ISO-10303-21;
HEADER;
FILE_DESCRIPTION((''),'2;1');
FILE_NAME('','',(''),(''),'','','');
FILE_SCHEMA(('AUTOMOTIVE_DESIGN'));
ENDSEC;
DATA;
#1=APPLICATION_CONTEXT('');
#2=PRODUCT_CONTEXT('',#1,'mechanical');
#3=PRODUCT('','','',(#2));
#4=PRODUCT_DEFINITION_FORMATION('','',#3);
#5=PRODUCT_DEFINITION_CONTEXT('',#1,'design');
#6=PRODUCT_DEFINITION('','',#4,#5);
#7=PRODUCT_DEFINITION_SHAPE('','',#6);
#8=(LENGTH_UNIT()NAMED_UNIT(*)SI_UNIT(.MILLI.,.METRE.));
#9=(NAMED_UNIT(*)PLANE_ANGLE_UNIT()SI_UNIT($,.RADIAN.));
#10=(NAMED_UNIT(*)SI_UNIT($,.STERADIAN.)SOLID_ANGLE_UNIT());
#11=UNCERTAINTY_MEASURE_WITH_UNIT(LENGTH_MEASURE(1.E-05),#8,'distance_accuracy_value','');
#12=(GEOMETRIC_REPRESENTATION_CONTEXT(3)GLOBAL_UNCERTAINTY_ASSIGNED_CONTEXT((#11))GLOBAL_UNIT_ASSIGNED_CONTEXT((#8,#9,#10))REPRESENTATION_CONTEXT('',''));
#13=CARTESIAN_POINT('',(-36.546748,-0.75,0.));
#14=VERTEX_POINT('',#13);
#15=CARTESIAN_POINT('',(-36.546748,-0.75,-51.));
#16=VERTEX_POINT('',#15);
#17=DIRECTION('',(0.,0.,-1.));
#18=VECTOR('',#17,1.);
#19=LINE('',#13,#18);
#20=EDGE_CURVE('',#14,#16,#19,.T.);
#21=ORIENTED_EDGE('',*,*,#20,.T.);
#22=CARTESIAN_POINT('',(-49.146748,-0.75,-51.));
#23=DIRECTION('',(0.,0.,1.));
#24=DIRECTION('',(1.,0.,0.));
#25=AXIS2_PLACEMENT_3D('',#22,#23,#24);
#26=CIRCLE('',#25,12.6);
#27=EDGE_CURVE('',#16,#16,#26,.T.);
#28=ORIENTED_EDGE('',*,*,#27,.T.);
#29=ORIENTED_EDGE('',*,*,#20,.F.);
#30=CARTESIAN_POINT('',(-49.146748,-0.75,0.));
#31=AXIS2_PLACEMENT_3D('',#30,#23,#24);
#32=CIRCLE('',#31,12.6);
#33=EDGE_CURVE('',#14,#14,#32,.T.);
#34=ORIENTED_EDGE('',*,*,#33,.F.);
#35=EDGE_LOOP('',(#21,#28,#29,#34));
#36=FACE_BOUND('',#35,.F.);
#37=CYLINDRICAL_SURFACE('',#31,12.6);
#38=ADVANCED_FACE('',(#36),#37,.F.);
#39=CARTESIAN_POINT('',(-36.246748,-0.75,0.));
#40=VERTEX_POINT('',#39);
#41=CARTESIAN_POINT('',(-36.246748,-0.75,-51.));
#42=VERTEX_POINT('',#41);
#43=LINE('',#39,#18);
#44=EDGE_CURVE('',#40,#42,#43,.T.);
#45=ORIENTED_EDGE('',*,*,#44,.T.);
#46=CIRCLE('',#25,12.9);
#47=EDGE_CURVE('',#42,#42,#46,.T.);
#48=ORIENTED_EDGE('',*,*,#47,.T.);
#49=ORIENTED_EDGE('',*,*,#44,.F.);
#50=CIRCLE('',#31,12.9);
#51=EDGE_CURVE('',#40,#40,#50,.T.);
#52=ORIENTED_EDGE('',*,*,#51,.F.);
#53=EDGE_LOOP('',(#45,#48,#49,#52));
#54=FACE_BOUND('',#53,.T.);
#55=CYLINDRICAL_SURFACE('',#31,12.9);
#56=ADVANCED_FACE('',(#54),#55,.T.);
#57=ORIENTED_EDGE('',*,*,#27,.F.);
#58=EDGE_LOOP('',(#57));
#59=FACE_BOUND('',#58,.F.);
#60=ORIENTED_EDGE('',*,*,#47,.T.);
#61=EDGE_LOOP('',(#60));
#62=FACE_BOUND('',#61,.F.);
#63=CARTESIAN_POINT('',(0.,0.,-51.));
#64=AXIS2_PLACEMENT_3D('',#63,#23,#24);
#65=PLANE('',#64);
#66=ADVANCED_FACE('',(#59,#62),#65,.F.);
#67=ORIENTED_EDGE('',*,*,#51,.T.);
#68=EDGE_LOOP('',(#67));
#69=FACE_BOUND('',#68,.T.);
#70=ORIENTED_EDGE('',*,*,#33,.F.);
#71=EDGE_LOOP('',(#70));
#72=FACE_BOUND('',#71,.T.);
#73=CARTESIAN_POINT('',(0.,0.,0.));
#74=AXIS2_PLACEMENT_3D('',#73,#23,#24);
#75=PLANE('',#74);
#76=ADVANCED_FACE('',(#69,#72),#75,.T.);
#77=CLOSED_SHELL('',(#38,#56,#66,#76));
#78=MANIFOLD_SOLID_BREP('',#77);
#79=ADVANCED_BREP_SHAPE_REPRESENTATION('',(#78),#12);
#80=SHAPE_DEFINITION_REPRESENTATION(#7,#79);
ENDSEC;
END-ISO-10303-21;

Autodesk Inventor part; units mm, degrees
ref_plane "YZ Plane" through (0, 0, 0) normal (1, 0, 0) x (0, 1, 0)
ref_plane "XZ Plane" through (0, 0, 0) normal (0, 1, 0) x (-1, 0, 0)
ref_plane "РабПлоскость1" through (0, 0, 0) normal (0, 0, 1) x (1, 0, 0)
ref_plane "РабПлоскость2" through (-62.145235, -0.948385, -51) normal (0, 0, -1) x (0.0152604, 0.9998836, 0)
sketch "Эскиз1" plane through (0, 0, 0) normal (0, 0, 1) x (1, 0, 0)
  circle A0 centre (-49.146748, -0.75) radius 13
  arc A1 (-26.791374, 12.735328) -> (-27.346776, 13.802246) centre (-28.76099, 12.388032) ccw
  line L0 (-27.346776, 13.802246) -> (-28.294531, 14.75)
  line L1 (-28.294531, 14.75) -> (-49.146748, 14.75)
  arc A2 (-49.146748, 14.75) -> (-61.552305, 8.542586) centre (-49.146748, -0.75) ccw
  line L2 (-61.552305, 8.542586) -> (-79, -14.75)
  line L3 (-79, -14.75) -> (-21.944969, -14.75)
  line L4 (-21.944969, -14.75) -> (-26.302484, 9.962691)
  line L5 (-26.302484, 9.962691) -> (-32.5, 9.962691)
  line L6 (-32.5, 9.962691) -> (-32.5, 12.162691)
  line L7 (-32.5, 12.162691) -> (-26.690403, 12.162691)
  line L8 (-26.690403, 12.162691) -> (-26.791374, 12.735328)
  circle A3 centre (-36.5, 10.75) radius 2.1
  circle A4 centre (-29.57484, -8.75) radius 2.1
  circle A5 centre (-67.146748, -8.75) radius 2.1
  circle A6 centre (-72.089282, -11.292059) radius 3.05
  circle A7 centre (-49.146748, -0.75) radius 12.9
  circle A8 centre (-49.146748, -0.75) radius 12.6
  point P0 (0, 0)
  dimension "d0" = 0.1
  dimension "d1" = 0.3
sketch "Эскиз1 outline for Выдавливание1" plane through (0, 0, 0) normal (0, 0, 1) x (1, 0, 0)
  circle A0 centre (-49.146748, -0.75) radius 12.9
  circle A1 centre (-49.146748, -0.75) radius 12.6
extrude "Выдавливание1" add sketch "Эскиз1 outline for Выдавливание1" against normal up to surface (51 mm away)
properties part number "motor_vtulka"
